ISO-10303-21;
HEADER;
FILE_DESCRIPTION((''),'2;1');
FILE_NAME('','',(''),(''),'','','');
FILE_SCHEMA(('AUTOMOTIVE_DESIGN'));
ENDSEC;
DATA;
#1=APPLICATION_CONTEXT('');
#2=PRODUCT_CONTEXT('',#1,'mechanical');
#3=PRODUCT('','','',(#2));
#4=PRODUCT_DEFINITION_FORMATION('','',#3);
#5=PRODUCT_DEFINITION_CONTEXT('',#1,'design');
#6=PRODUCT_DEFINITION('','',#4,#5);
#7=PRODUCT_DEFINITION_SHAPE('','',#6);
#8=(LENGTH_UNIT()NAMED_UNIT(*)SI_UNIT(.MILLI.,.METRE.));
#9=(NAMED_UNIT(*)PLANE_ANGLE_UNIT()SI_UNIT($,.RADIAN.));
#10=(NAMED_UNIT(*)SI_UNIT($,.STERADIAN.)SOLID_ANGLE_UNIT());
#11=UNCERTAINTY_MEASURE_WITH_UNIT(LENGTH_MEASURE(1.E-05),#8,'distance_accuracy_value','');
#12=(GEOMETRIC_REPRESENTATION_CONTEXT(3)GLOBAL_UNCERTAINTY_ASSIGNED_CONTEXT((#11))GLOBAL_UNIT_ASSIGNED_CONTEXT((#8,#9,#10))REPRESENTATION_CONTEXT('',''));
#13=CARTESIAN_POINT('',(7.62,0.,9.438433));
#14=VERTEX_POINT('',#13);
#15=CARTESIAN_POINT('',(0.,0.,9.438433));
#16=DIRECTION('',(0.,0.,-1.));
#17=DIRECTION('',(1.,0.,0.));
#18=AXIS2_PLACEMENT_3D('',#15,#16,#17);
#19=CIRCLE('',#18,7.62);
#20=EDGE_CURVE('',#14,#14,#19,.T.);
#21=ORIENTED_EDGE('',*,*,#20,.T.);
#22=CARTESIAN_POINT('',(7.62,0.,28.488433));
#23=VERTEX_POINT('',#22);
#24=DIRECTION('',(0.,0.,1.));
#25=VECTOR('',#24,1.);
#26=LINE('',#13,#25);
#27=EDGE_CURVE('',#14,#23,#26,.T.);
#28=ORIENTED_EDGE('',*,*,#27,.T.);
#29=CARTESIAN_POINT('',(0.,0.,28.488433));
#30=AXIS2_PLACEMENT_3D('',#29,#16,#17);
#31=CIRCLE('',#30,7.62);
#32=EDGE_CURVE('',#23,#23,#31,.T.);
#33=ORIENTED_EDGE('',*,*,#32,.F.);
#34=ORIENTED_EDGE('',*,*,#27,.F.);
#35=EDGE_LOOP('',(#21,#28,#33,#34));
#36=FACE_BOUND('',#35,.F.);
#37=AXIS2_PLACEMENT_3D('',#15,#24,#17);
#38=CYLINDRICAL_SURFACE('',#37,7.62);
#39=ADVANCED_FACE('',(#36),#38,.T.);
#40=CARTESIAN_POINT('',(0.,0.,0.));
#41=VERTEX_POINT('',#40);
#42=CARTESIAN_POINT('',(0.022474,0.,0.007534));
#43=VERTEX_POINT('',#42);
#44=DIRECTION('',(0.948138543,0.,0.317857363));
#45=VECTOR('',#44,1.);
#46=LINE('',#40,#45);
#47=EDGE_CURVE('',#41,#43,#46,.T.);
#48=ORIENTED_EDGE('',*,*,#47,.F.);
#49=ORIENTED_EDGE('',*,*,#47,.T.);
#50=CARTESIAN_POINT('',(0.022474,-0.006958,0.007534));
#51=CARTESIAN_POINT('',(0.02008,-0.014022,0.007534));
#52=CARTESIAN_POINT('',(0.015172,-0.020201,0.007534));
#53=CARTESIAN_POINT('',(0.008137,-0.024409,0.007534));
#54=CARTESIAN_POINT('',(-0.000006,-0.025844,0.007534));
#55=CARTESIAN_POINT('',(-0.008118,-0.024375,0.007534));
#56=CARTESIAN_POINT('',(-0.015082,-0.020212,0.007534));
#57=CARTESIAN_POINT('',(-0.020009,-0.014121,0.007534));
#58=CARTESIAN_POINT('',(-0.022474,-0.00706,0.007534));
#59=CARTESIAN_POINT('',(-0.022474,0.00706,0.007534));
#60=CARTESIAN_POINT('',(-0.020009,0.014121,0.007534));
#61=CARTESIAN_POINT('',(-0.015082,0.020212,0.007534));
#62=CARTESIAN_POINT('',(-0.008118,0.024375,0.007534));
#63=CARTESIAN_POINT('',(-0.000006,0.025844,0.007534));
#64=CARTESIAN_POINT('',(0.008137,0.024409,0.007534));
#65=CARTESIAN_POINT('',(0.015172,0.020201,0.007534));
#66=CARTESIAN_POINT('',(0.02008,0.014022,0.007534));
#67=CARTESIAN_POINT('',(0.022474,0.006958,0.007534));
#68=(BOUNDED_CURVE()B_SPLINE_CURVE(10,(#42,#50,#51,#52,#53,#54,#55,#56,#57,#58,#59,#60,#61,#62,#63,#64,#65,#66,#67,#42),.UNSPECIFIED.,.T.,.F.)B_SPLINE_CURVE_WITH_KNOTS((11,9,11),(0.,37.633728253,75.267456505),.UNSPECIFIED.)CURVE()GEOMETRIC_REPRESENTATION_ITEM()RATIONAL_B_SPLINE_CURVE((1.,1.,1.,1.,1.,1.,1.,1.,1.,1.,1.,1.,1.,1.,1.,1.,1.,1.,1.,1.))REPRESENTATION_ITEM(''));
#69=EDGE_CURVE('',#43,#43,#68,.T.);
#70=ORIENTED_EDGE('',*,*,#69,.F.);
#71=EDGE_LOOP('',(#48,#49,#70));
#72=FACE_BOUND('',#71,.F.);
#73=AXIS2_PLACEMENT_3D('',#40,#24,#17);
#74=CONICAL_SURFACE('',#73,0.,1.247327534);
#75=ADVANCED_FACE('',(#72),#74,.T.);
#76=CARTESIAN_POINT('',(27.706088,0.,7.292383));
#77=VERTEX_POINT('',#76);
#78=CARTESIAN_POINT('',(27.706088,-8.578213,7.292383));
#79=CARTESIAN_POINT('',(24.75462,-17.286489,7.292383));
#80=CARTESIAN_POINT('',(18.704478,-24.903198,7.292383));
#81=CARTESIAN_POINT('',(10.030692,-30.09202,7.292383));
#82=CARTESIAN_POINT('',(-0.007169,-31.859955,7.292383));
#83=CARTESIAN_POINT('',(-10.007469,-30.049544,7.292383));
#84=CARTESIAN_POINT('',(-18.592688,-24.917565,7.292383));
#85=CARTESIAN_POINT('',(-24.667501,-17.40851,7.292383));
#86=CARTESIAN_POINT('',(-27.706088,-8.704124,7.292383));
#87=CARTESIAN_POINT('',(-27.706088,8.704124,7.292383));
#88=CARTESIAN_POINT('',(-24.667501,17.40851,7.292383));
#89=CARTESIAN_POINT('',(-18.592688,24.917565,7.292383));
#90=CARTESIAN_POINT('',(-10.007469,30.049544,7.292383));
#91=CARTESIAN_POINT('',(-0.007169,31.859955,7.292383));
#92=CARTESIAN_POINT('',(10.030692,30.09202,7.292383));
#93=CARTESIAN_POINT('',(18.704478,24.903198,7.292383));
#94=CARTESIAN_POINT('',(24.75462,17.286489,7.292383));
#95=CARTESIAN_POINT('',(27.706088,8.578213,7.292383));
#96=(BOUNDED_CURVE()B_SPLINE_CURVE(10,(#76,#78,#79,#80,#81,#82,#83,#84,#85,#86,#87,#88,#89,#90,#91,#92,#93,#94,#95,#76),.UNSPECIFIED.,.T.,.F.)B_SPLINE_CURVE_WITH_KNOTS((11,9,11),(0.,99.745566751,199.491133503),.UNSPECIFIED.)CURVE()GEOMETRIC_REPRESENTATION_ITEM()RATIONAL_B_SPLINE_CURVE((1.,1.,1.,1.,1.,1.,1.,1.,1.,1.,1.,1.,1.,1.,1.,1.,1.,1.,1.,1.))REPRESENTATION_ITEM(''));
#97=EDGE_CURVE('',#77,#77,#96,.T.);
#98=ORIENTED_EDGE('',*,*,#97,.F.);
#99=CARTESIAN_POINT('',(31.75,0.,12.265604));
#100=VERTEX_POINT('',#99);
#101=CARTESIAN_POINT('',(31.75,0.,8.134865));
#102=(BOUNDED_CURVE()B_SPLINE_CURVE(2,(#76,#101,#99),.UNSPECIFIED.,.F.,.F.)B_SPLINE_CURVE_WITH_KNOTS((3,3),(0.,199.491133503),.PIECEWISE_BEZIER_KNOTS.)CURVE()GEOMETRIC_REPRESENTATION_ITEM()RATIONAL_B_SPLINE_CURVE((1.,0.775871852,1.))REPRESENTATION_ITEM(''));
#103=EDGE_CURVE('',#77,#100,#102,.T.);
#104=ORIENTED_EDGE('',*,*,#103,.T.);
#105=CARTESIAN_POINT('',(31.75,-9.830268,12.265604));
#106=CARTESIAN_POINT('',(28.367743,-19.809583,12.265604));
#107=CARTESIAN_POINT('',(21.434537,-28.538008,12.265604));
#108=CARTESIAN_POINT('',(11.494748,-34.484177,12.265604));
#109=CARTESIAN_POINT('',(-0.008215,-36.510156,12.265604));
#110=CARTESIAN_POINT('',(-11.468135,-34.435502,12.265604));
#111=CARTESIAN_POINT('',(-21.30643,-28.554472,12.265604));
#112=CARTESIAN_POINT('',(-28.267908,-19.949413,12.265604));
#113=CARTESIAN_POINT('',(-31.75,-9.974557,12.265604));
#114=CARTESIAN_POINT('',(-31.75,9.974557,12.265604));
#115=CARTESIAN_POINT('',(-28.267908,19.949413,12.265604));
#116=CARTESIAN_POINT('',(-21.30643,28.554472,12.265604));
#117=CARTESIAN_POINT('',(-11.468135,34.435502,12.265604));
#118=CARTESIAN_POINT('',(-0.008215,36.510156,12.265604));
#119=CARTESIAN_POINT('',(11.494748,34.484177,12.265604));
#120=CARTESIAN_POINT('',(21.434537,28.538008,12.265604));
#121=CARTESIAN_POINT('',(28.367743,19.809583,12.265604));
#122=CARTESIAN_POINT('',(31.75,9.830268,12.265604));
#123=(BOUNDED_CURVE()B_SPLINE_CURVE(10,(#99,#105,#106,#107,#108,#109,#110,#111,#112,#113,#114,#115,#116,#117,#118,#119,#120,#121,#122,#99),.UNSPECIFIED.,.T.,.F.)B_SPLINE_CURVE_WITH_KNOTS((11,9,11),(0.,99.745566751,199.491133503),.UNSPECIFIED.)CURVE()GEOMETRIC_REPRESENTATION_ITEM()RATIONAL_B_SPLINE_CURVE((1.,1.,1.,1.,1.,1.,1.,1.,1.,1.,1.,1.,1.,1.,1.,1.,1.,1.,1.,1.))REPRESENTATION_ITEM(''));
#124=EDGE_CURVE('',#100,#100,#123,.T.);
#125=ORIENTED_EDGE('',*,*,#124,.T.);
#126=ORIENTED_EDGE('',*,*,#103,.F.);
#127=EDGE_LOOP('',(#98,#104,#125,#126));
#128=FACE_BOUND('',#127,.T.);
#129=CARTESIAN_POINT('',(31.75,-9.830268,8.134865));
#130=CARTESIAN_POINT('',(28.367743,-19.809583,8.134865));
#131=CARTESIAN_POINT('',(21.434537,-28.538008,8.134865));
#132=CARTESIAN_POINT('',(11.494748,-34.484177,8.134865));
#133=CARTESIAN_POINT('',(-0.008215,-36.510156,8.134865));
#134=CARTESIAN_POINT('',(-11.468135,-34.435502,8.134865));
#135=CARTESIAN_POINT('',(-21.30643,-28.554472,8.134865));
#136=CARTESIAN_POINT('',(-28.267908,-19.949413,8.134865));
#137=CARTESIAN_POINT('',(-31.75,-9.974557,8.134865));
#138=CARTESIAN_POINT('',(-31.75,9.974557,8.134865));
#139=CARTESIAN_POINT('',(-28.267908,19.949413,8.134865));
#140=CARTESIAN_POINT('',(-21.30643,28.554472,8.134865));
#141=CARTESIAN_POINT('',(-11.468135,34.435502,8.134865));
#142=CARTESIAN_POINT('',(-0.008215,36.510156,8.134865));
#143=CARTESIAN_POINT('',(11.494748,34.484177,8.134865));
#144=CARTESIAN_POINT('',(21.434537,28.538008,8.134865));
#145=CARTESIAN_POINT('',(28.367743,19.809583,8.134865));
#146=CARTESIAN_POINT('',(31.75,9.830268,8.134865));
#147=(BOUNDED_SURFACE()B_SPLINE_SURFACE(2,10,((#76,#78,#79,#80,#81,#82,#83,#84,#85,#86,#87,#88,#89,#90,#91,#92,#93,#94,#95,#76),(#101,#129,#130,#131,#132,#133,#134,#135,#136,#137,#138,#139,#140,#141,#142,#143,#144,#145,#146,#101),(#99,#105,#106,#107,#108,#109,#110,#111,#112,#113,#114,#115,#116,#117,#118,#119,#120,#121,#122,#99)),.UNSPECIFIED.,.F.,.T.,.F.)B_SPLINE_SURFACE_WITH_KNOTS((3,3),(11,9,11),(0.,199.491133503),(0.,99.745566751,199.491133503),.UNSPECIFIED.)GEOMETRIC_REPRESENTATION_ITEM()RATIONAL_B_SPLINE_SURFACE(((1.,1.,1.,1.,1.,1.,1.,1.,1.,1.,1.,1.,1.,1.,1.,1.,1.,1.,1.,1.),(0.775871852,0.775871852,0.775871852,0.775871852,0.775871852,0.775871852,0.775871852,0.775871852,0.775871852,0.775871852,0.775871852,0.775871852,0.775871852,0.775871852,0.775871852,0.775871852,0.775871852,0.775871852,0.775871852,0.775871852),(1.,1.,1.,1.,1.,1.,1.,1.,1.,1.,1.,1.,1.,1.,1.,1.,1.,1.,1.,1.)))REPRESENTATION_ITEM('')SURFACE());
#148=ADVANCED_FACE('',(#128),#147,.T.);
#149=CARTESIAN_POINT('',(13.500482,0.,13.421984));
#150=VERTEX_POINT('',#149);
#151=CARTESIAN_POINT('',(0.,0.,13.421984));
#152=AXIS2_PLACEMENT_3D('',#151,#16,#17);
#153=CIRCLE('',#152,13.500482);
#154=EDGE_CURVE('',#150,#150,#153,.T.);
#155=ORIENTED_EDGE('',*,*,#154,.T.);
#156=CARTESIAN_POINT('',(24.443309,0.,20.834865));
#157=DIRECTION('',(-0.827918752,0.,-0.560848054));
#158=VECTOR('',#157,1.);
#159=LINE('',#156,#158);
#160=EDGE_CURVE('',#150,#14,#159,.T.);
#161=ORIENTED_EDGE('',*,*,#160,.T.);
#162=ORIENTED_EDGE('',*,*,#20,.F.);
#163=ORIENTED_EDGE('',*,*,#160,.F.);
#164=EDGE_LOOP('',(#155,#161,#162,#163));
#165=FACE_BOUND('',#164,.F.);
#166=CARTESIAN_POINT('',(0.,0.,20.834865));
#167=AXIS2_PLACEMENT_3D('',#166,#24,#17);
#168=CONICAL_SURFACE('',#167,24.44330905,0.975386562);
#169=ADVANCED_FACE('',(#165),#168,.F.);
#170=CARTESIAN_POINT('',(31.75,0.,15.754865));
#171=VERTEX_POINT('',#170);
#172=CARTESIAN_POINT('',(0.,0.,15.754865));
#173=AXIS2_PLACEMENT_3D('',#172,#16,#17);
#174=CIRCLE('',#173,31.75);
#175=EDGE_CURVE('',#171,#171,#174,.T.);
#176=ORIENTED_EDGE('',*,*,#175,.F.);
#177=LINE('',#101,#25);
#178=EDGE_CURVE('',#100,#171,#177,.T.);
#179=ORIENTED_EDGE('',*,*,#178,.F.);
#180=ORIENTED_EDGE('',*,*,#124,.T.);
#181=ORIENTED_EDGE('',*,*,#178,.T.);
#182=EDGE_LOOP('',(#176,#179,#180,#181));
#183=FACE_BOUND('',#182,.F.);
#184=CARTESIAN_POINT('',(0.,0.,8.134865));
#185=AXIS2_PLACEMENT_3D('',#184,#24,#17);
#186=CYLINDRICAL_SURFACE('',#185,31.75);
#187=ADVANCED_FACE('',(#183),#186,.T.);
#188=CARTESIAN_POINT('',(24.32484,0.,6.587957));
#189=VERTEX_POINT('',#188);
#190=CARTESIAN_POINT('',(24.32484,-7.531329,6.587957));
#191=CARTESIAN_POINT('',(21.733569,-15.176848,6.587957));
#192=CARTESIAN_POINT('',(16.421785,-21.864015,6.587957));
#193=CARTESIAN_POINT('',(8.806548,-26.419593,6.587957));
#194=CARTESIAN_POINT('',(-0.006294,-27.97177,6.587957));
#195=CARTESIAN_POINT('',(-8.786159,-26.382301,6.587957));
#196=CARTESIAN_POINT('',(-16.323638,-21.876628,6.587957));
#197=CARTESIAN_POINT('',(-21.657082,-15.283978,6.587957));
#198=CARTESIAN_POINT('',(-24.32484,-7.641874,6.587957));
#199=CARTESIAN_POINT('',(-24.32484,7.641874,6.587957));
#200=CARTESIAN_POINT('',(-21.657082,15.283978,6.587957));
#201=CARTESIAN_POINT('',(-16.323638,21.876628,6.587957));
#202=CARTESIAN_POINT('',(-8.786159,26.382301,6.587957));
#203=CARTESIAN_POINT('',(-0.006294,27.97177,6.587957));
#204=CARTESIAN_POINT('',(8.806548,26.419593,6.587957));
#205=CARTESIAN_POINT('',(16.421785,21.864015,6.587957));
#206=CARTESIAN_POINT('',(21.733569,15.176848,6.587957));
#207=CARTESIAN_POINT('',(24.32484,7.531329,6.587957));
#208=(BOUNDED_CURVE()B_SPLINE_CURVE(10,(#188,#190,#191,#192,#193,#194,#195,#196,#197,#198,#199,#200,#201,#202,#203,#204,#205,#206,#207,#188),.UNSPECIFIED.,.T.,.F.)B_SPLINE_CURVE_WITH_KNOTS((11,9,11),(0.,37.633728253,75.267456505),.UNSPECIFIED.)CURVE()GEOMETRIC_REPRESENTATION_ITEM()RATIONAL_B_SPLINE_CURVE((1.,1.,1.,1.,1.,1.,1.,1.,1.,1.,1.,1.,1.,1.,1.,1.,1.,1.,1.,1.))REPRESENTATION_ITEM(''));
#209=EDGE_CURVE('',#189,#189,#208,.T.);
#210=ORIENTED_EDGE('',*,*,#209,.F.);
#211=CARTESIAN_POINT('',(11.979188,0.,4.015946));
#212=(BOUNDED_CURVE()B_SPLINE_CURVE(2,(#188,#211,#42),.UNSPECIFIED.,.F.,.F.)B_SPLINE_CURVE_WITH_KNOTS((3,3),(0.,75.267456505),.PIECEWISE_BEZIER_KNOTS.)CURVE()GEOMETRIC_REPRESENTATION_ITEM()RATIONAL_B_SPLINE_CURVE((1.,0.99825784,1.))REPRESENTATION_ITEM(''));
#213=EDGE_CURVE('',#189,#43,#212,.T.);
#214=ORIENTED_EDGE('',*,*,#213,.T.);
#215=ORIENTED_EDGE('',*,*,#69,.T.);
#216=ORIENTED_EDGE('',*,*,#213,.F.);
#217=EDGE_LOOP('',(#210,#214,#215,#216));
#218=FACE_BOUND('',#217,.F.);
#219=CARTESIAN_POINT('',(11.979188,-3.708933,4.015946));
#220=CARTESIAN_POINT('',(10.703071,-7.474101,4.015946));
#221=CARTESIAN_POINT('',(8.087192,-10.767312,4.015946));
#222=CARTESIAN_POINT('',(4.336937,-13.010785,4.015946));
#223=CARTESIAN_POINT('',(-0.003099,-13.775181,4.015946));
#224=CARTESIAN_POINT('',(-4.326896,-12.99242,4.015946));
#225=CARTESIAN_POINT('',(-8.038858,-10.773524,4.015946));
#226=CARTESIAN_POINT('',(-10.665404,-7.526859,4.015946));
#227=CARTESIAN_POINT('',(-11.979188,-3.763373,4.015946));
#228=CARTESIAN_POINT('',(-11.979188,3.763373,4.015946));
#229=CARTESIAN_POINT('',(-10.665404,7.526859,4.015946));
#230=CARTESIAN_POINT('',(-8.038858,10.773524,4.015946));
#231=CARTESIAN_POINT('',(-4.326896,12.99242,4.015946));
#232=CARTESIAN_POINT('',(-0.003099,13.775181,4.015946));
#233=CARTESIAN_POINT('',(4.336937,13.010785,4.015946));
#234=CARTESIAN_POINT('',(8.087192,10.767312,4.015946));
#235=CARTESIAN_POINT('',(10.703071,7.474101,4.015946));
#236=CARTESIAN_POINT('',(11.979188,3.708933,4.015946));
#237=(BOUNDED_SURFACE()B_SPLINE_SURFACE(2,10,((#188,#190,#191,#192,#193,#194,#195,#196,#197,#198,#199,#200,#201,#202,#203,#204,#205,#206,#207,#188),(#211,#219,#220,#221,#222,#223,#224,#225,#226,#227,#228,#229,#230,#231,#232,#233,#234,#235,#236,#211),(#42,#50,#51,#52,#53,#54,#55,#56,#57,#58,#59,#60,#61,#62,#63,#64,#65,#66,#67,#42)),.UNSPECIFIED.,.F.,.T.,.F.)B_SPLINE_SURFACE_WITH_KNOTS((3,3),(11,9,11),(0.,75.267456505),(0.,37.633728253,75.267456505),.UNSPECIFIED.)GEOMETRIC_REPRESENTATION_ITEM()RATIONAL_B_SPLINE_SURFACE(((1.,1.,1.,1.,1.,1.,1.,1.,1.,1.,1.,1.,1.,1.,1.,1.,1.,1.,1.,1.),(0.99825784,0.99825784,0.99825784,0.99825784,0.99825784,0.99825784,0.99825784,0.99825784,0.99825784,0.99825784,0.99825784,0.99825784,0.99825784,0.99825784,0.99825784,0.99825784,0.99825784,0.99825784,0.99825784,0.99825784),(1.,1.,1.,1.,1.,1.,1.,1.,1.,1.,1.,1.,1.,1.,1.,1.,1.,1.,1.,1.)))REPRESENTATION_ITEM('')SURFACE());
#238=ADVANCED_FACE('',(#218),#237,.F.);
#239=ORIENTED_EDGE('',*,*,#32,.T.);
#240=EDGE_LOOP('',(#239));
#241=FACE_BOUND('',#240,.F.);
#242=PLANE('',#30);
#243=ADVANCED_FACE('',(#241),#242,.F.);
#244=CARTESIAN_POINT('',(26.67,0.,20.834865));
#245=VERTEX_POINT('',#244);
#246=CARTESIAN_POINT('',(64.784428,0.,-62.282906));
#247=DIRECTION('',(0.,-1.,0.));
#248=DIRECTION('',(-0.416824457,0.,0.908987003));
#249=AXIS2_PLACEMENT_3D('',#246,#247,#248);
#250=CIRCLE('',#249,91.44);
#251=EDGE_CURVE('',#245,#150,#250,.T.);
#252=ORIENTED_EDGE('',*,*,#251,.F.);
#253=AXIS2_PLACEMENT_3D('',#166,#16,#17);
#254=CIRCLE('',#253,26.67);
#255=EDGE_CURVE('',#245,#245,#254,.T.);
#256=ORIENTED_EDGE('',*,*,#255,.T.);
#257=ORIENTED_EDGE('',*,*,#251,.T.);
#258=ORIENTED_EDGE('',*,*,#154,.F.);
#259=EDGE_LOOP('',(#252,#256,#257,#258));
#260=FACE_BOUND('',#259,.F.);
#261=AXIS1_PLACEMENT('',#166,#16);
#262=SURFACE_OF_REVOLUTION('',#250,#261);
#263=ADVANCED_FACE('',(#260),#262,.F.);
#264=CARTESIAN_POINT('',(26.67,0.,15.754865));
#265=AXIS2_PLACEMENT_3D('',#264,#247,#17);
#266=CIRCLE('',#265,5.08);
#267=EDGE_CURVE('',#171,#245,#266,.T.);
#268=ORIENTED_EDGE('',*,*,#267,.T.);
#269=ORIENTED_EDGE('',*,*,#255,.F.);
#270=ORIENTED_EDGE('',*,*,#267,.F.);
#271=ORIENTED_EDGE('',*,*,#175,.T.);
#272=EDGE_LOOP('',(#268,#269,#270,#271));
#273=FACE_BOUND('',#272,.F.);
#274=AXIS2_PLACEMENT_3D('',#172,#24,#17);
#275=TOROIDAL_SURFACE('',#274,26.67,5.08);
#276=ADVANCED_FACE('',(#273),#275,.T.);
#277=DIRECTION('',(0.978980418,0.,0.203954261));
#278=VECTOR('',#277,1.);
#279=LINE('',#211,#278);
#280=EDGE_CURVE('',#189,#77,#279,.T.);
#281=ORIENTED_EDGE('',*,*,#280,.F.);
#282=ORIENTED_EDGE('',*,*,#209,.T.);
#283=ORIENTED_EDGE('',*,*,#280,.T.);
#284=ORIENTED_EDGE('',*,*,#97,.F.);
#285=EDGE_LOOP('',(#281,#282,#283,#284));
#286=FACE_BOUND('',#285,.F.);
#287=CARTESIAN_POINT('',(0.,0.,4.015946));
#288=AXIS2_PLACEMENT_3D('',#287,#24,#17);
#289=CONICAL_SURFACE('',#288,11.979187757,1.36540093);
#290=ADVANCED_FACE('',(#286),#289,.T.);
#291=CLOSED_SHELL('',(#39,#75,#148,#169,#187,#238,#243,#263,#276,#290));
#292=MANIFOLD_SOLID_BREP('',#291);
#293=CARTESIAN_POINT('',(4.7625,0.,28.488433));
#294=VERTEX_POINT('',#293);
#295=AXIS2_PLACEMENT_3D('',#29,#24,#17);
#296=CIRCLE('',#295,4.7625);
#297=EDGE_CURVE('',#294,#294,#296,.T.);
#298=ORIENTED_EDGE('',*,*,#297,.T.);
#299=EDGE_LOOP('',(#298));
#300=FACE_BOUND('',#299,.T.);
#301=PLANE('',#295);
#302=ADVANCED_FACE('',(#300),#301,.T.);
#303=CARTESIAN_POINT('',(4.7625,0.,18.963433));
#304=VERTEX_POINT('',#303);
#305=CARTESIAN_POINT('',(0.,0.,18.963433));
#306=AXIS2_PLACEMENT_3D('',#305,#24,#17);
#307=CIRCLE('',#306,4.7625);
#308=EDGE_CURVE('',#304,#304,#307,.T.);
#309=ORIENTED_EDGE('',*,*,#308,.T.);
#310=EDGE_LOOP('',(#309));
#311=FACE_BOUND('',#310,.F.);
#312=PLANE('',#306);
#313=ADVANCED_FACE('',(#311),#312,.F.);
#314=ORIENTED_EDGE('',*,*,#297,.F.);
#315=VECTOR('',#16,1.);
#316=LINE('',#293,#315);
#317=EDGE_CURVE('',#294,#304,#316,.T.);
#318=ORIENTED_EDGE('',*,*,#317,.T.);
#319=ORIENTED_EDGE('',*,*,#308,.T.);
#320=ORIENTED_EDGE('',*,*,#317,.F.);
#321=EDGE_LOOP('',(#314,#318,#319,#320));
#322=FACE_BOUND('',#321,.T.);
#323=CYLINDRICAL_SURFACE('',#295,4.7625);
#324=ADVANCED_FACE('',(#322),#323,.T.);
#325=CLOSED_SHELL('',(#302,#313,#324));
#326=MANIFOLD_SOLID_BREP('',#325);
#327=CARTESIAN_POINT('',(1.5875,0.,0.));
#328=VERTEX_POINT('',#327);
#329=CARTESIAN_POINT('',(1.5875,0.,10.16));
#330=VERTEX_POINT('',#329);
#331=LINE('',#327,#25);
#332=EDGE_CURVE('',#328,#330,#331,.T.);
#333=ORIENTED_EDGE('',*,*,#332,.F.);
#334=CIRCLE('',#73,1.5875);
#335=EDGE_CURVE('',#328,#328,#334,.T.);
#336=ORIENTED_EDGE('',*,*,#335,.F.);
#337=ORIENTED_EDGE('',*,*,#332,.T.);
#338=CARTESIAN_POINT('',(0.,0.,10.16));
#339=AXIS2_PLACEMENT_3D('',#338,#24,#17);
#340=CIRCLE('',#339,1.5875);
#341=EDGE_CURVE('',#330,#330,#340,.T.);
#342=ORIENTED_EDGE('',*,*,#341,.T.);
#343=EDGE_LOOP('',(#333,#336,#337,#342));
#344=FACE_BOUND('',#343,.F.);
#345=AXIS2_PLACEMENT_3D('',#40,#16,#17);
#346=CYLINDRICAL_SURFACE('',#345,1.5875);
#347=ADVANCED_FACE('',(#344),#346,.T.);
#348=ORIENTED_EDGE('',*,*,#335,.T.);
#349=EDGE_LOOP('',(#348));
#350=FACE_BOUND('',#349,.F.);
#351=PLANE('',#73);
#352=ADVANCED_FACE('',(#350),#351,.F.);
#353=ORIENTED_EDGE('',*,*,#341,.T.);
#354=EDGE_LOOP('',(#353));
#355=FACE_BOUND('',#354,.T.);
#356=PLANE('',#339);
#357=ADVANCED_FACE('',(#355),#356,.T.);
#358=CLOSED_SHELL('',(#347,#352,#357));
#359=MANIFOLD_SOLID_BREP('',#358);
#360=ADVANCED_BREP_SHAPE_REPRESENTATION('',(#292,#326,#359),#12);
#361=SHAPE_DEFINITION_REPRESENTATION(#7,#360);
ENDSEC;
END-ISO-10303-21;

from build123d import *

# Parameters (mm, degrees)
F2_R     = 5.08
F4_R     = 213.36
F5_R     = 4.7625
F6_DEPTH = 9.525
F7_R     = 1.5875
F8_DEPTH = 10.16


# Not quite as in the source:
# - a fillet or chamfer that OpenCascade refuses, or shapes differently, is made with other operations: its cross-section is extruded or revolved along the edge and cut away or added


with BuildPart() as f1:
    # F0 (on Front) → F1 (revolve)
    with BuildSketch(Plane.XZ):
        Polygon((11.9791877568, 4.0159458295), (31.75, 8.134865202), (31.75, 20.834865202), (24.4433090497, 20.834865202), (7.62, 9.4384327507), (7.62, 28.4884327507), (0, 28.4884327507), (0, 0), align=None)
    revolve(axis=Axis((0, 0, 14.2442163754), (0, 0, -1)))

    # F2
    f2_edges = [f1.edges().sort_by_distance(p)[0] for p in [
        (-31.75, 0, 8.134865),
        (-31.75, 0, 20.834865),
        (31.75, 0, 14.484865),
    ]]
    fillet(f2_edges, radius=F2_R)

    # F3: fillet of radius 91.44 on 2 edges, made by hand

    # F3_s1 → F3_t2 (revolve, cut)
    with BuildSketch(Plane.XZ):
        with BuildLine():
            ThreePointArc((26.67, 20.834865202), (19.9318360713, 17.4009600318), (13.5004823618, 13.4219843706))
            Line((13.5004823618, 13.4219843706), (24.4433090497, 20.834865202))
            Line((24.4433090497, 20.834865202), (26.67, 20.834865202))
        make_face()
    revolve(axis=Axis((0, 0, 20.834865202), (0, 0, -1)), mode=Mode.SUBTRACT)

    # F4
    f4_edges = [f1.edges().sort_by_distance(p)[0] for p in [
        (-11.979188, 0, 4.015946),
        (-27.706088, 0, 7.292383),
    ]]
    fillet(f4_edges, radius=F4_R)


with BuildPart() as f6:
    # F5 (on face) → F6 (new body)
    with BuildSketch(Plane.XY.offset(28.4884327507)):
        Circle(F5_R)
    extrude(amount=-F6_DEPTH)


with BuildPart() as f8:
    # F7 (on Top) → F8 (new body)
    with BuildSketch(Plane.XY):
        Circle(F7_R)
    extrude(amount=F8_DEPTH)


solid = Compound([f1.part, f6.part, f8.part])
